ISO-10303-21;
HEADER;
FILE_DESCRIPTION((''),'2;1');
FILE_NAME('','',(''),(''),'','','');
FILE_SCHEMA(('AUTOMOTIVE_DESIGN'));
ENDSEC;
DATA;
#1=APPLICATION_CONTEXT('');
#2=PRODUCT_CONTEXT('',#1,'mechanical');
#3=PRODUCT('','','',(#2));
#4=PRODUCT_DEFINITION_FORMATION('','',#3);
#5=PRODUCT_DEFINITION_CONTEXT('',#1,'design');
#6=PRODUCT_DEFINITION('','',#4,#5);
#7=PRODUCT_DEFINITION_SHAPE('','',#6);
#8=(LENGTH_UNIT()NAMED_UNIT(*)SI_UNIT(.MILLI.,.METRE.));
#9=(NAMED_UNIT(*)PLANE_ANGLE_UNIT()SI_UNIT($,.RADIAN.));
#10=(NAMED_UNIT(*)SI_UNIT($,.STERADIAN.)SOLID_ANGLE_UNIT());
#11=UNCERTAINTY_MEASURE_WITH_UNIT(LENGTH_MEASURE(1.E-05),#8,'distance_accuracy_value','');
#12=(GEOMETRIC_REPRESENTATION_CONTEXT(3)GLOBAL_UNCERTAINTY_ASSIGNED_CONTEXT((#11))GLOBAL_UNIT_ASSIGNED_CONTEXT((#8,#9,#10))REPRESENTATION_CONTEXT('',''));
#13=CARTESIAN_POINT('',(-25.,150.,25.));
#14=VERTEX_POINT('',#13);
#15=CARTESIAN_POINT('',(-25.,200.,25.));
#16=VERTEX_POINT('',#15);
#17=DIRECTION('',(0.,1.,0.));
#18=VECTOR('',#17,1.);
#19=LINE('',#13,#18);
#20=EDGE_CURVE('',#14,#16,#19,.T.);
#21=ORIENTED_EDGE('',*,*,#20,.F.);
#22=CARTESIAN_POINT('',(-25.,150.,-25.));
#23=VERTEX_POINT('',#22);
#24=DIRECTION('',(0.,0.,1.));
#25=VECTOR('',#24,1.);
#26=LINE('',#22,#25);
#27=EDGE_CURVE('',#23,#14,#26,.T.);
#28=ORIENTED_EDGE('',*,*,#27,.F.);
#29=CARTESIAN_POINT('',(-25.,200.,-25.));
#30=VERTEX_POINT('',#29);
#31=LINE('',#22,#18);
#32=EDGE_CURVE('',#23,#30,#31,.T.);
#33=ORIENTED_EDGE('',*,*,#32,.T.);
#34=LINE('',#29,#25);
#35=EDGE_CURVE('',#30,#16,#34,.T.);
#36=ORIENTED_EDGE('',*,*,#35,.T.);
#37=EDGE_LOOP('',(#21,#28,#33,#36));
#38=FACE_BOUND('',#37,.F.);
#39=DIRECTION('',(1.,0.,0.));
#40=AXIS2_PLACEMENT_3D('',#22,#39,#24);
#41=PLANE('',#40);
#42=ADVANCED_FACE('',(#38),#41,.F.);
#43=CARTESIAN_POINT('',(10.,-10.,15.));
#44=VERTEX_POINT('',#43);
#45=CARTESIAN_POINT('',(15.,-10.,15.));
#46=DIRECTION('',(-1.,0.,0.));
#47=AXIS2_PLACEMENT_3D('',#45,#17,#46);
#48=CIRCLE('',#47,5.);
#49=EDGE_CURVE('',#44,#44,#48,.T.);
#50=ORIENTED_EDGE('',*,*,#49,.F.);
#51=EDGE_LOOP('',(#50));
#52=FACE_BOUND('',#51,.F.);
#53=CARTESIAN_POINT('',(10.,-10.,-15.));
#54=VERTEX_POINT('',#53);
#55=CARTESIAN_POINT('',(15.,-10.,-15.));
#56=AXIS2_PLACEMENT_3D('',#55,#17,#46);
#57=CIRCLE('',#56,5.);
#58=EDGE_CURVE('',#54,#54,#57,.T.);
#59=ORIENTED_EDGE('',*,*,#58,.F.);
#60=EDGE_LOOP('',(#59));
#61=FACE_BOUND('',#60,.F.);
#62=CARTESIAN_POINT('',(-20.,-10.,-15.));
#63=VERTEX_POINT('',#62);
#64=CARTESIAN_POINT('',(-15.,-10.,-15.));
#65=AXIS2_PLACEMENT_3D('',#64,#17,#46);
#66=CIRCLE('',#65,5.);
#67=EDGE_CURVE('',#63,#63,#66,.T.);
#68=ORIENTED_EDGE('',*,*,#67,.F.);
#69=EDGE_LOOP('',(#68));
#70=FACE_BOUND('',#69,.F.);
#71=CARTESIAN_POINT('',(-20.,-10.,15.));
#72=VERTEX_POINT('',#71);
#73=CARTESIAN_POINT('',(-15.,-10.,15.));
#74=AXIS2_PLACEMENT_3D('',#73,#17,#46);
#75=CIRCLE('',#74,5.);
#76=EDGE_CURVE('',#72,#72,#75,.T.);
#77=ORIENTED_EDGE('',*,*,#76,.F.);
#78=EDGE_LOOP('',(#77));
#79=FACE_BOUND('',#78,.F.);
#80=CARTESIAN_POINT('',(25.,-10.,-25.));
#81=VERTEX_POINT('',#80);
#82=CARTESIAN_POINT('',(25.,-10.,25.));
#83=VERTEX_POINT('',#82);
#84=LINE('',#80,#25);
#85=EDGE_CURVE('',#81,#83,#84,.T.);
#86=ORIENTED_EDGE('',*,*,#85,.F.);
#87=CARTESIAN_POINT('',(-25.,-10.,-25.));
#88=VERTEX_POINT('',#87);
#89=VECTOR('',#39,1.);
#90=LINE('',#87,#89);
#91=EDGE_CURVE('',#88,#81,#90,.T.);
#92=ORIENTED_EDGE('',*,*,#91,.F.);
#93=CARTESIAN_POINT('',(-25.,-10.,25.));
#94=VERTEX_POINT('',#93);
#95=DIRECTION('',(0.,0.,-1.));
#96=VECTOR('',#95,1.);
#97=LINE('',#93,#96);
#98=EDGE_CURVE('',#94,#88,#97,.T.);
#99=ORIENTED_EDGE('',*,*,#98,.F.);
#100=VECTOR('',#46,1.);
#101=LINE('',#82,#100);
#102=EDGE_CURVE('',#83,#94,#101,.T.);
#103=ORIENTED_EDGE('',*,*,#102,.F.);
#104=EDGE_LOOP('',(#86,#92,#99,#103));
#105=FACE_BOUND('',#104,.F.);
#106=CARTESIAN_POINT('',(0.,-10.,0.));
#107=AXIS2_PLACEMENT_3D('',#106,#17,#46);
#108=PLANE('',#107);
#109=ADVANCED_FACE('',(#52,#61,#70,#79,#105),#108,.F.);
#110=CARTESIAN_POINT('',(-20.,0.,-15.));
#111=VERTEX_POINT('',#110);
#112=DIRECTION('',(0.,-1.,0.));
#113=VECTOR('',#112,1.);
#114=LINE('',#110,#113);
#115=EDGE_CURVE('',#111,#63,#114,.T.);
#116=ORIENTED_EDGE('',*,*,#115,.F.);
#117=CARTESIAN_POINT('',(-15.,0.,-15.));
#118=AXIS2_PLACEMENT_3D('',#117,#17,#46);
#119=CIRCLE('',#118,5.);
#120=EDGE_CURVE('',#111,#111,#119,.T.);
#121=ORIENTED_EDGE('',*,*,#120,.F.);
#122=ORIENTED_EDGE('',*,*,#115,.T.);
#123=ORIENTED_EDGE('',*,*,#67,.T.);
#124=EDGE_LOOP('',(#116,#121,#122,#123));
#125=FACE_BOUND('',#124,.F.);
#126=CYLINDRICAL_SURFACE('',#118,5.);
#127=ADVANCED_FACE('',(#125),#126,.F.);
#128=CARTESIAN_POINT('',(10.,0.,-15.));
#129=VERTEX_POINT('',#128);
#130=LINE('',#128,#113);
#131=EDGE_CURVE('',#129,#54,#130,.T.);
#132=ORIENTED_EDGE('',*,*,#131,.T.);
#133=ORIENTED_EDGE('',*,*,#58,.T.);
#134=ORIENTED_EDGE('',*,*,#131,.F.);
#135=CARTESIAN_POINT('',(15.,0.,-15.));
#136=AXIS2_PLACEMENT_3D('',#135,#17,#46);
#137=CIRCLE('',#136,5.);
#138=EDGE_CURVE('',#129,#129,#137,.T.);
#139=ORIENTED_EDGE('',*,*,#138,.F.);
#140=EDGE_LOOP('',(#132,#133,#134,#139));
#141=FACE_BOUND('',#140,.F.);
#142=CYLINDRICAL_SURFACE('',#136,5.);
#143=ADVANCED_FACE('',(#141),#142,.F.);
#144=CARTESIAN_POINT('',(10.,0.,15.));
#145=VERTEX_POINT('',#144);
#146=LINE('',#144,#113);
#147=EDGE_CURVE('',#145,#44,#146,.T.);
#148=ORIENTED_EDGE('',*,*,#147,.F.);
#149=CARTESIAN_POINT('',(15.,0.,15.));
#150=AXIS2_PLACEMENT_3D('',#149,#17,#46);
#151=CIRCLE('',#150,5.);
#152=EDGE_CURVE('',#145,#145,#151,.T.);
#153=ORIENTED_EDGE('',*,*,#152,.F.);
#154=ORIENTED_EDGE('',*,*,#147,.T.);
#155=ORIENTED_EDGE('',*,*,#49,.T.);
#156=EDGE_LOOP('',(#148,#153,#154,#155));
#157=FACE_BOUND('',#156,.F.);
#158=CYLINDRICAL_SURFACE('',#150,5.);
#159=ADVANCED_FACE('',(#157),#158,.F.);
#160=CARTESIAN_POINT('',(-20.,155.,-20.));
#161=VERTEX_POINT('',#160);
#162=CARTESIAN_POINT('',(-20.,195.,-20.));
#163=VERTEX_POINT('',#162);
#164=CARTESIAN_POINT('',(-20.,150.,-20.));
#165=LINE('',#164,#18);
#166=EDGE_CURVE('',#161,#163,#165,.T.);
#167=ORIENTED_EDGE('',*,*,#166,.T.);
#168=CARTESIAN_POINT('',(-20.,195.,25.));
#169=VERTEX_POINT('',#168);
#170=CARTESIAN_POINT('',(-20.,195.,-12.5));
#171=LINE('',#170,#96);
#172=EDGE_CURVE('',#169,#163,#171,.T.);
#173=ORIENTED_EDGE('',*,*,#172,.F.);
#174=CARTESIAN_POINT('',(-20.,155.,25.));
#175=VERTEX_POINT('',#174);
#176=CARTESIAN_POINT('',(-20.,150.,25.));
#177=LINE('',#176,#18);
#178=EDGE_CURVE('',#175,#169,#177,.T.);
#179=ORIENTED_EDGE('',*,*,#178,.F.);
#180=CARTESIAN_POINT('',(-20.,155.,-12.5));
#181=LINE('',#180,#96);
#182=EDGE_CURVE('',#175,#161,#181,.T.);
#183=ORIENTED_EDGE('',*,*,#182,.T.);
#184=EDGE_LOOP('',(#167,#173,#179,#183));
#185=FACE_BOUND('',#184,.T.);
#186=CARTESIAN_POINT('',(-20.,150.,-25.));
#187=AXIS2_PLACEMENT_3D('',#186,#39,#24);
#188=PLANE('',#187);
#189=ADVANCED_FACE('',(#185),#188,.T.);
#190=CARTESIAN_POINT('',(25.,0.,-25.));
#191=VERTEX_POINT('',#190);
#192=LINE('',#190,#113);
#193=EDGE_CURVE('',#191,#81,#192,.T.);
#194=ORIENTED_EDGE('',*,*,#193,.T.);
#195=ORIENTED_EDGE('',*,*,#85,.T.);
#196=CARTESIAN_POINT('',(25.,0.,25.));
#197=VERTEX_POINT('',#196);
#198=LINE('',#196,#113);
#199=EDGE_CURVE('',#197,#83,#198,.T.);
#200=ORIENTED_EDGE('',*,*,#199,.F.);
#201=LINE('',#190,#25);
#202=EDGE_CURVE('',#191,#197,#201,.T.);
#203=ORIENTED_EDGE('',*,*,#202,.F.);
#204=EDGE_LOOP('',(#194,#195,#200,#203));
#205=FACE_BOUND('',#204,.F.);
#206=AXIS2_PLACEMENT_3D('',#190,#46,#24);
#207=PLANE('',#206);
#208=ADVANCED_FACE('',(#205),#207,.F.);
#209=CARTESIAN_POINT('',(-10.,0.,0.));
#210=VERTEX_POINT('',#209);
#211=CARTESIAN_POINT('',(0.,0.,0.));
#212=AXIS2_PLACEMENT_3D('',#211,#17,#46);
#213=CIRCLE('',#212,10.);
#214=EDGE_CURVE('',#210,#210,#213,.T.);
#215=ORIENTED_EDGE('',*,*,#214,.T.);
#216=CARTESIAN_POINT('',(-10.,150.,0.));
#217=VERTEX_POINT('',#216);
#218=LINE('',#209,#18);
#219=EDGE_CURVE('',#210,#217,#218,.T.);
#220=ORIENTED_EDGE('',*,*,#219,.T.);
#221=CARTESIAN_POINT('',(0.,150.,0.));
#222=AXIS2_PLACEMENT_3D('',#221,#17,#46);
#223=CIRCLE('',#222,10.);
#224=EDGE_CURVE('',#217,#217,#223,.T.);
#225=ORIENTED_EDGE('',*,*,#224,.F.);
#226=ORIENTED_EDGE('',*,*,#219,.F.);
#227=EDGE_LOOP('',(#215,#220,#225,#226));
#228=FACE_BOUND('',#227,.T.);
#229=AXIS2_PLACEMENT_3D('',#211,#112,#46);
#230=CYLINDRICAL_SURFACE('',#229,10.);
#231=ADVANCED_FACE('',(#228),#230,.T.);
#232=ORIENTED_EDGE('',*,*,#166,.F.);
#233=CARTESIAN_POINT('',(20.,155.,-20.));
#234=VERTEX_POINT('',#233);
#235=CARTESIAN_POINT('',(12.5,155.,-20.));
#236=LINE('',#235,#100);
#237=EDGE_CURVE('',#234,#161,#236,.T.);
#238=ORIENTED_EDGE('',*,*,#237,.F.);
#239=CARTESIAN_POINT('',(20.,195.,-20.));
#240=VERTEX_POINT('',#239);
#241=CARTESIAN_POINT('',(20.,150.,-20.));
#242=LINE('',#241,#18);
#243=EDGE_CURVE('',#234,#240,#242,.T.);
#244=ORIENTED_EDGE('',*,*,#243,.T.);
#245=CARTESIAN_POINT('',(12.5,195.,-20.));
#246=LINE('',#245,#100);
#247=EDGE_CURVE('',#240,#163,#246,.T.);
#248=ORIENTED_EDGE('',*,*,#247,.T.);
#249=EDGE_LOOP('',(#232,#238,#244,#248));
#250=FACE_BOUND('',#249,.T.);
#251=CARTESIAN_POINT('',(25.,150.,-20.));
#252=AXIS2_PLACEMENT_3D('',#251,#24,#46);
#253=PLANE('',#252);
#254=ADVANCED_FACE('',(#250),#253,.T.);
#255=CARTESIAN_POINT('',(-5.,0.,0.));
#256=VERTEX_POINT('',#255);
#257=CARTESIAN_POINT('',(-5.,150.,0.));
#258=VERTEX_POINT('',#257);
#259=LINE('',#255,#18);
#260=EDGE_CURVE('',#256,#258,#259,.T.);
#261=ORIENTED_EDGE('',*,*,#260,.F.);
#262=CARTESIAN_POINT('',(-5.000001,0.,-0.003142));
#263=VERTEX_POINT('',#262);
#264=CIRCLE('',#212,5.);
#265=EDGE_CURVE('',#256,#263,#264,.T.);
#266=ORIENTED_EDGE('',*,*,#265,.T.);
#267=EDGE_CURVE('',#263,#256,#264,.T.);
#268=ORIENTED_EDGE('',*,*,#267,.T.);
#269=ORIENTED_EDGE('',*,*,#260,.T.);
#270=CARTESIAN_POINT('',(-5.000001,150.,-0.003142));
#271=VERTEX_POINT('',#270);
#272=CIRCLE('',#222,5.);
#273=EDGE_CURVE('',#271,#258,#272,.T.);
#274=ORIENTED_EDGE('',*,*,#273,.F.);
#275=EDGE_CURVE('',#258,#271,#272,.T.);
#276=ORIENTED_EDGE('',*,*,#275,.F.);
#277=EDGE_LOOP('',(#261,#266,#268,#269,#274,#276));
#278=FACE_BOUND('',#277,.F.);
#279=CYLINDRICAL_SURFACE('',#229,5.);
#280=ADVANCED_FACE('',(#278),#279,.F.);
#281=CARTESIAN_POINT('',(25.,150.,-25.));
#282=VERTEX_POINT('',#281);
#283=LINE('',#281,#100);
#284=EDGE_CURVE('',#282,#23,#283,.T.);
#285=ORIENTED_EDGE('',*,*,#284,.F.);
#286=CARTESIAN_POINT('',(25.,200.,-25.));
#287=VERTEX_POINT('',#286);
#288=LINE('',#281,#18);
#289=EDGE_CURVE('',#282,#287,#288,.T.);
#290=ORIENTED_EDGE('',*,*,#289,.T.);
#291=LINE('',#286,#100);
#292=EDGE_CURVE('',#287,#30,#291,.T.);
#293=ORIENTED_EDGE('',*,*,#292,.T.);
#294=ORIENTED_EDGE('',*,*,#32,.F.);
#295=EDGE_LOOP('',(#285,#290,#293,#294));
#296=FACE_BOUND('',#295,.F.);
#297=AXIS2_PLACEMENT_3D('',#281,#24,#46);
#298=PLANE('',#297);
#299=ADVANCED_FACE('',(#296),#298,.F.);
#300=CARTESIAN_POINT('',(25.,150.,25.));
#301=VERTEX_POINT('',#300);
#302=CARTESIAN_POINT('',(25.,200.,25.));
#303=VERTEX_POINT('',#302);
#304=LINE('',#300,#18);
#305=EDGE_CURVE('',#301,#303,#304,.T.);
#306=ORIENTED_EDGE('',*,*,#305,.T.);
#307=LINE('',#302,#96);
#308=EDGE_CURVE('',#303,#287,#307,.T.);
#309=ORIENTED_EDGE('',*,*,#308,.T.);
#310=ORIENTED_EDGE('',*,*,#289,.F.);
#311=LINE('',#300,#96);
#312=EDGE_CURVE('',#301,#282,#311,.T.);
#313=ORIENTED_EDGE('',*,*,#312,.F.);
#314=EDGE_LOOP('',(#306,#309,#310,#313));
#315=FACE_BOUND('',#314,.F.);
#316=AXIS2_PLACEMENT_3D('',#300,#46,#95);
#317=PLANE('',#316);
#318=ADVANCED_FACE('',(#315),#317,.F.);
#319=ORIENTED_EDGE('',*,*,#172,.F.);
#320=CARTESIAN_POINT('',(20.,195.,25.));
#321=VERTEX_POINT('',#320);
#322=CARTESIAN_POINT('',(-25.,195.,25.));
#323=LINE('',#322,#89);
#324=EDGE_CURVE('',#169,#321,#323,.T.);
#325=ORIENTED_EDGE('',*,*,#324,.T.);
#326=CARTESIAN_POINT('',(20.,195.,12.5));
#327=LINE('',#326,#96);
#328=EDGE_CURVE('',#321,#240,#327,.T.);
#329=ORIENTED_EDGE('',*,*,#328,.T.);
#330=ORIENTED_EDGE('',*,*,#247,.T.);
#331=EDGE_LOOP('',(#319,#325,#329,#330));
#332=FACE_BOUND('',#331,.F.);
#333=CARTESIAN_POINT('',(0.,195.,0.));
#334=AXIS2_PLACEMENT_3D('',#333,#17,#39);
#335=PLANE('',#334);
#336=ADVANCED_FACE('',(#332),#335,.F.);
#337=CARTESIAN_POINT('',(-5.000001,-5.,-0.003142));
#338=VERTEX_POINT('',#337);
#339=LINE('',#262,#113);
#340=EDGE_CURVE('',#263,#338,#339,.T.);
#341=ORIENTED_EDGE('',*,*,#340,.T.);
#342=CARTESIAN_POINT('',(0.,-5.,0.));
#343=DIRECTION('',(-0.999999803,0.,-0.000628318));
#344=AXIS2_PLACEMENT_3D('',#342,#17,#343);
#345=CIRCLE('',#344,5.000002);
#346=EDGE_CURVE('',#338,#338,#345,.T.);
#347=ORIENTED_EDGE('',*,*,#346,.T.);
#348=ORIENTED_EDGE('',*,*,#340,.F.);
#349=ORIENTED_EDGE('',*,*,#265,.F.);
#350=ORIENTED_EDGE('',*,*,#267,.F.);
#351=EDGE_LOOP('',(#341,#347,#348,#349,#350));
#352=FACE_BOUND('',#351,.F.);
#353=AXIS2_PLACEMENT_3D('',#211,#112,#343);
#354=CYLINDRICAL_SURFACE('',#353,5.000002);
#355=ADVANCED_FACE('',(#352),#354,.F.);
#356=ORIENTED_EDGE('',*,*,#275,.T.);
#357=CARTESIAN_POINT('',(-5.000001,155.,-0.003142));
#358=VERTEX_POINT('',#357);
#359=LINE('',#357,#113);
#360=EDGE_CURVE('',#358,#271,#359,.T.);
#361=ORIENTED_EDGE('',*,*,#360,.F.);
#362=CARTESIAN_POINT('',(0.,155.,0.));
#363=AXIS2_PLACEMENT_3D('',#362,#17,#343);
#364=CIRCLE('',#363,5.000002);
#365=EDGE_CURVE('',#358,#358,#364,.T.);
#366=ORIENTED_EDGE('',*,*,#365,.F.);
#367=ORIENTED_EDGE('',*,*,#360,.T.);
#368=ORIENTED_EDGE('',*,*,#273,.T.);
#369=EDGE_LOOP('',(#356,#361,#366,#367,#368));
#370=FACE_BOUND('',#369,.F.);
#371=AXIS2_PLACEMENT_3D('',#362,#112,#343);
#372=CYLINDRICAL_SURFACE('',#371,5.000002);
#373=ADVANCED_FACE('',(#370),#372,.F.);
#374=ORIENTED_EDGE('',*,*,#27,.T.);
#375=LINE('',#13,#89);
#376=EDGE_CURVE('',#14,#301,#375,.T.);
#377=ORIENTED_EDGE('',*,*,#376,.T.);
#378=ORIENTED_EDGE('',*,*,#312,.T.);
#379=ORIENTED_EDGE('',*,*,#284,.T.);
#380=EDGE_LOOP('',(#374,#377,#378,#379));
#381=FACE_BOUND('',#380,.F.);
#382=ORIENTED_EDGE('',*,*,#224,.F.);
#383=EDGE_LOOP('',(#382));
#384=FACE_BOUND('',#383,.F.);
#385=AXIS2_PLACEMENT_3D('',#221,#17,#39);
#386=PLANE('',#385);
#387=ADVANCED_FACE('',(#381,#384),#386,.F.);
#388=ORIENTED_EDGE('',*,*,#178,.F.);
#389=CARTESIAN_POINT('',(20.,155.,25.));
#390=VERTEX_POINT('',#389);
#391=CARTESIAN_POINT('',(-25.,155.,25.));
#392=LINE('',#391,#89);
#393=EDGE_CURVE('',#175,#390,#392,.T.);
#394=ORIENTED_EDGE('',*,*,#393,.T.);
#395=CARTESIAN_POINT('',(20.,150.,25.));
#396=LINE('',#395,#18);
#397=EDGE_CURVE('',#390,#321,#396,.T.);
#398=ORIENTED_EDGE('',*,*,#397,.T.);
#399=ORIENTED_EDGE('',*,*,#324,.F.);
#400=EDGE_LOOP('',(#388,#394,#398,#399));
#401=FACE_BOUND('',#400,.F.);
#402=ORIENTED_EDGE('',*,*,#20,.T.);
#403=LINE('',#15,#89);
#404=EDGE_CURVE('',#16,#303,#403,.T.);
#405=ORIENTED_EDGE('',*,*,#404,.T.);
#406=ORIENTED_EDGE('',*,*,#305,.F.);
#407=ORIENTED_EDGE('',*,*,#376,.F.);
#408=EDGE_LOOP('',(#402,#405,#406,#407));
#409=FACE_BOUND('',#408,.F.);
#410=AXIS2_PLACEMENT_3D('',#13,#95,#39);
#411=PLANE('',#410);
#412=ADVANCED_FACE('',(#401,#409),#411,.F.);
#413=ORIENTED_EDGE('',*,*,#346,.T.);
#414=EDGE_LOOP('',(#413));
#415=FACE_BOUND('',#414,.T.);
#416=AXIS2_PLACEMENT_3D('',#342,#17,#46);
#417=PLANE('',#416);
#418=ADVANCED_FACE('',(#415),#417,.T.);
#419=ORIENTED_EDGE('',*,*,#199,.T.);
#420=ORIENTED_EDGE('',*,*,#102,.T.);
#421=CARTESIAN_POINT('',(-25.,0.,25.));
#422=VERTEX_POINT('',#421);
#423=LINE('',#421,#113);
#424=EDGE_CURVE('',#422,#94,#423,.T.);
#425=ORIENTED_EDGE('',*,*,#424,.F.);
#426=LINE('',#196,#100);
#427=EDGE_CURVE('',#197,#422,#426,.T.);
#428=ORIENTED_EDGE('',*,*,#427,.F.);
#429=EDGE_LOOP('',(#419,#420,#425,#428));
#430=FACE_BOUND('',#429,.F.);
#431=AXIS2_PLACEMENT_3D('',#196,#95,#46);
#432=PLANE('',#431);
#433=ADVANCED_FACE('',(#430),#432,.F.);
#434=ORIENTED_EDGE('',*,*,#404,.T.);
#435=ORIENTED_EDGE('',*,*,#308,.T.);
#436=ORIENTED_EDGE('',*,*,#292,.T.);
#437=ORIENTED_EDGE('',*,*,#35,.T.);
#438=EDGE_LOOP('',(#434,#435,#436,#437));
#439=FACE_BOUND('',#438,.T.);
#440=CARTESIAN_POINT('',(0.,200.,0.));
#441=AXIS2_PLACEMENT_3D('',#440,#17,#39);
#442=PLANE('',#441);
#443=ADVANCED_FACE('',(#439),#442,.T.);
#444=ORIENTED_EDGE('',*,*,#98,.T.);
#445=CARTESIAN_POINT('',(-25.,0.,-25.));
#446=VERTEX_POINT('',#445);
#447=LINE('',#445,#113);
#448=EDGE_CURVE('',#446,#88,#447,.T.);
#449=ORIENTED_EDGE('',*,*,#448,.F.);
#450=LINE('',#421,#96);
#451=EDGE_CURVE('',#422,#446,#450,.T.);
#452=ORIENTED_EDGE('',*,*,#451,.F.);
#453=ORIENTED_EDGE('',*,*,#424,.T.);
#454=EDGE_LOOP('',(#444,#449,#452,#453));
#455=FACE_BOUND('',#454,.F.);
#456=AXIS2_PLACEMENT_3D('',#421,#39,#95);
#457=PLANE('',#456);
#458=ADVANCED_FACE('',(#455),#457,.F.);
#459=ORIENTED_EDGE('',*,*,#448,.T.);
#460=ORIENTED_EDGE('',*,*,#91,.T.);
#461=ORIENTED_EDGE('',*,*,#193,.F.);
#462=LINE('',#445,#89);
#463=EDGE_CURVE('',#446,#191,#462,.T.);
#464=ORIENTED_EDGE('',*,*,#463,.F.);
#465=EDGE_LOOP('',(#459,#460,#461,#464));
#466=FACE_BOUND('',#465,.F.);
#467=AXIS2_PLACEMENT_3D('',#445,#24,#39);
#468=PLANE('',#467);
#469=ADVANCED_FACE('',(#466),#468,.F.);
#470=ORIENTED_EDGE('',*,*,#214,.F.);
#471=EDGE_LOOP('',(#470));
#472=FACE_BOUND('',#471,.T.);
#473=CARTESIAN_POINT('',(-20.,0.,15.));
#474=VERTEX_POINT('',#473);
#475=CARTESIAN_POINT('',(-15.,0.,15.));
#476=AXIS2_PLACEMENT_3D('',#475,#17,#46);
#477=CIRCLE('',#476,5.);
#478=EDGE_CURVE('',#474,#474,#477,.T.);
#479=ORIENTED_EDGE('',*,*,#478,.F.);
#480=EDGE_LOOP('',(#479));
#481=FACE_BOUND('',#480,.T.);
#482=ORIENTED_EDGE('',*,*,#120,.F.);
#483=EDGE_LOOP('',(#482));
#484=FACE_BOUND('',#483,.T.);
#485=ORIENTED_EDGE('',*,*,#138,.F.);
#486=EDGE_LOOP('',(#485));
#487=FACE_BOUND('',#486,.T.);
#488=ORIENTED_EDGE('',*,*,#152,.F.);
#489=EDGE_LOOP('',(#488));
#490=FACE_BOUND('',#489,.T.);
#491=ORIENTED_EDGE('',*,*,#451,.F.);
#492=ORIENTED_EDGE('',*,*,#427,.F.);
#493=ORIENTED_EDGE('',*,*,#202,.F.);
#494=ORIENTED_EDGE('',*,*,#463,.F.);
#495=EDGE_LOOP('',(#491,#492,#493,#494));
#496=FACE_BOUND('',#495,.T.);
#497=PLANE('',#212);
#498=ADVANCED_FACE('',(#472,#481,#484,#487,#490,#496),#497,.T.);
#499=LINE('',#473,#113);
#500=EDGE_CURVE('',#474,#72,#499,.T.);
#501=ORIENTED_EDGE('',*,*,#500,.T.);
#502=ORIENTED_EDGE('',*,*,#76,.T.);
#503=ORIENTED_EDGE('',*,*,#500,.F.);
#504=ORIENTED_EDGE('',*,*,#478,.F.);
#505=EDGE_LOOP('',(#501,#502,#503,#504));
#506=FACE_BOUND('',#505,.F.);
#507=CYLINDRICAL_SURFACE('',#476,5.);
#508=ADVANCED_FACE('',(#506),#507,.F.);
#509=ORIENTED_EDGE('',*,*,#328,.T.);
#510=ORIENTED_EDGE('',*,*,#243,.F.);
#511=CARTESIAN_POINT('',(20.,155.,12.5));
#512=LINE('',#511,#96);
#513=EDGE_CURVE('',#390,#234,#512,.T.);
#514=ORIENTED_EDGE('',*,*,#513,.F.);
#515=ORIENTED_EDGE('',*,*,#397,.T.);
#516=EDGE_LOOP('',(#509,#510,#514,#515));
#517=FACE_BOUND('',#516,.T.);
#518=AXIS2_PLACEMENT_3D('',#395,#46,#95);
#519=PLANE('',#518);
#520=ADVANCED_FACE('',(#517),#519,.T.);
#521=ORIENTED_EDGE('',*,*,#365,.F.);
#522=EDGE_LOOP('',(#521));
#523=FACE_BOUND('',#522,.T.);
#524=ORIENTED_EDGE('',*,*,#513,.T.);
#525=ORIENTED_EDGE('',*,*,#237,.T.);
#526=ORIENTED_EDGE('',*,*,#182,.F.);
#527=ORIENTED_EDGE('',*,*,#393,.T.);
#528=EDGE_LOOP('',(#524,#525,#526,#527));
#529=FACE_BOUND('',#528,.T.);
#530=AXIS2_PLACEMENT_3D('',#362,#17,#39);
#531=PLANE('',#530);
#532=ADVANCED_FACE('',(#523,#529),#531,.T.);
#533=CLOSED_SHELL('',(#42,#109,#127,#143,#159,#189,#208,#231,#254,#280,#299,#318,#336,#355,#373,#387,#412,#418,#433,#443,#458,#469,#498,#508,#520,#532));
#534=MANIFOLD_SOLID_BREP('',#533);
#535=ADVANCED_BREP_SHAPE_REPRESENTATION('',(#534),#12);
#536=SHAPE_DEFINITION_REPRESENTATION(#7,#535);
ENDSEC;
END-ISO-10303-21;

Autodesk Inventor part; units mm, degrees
ref_plane "YZ Plane" through (0, 0, 0) normal (1, 0, 0) x (0, 1, 0)
ref_plane "XZ Plane" through (0, 0, 0) normal (0, 1, 0) x (-1, 0, 0)
ref_plane "XY Plane" through (0, 0, 0) normal (0, 0, 1) x (1, 0, 0)
sketch "Sketch1" plane through (0, 0, 0) normal (0, 1, 0) x (-1, 0, 0)
  line L0 (-25, 25) -> (25, 25)
  line L1 (25, 25) -> (25, -25)
  line L2 (25, -25) -> (-25, -25)
  line L3 (-25, -25) -> (-25, 25)
  line L4 (-25, 25) -> (25, -25) construction
  line L5 (25, 25) -> (-25, -25) construction
  circle A0 centre (15, -15) radius 5
  circle A1 centre (-15, -15) radius 5
  circle A2 centre (15, 15) radius 5
  circle A3 centre (-15, 15) radius 5
  circle A4 centre (0, 0) radius 10
  dimension "d0" = 50
  dimension "d1" = 50
  dimension "d2" = 10
  dimension "d3" = 10
  dimension "d6" = 30
  dimension "d9" = 30
  dimension "d12" = 20
extrude "Extrusion1" add sketch "Sketch1" along normal blind 150 contours A4
extrude "Extrusion2" add sketch "Sketch1" against normal blind 10 contours L0 L1 L2 L3 | A4
thread "Thread1" size "M10x1.5" class "6H" standard "ANSI Metric M Profile" length 8
thread "Thread2" size "M10x1.5" class "6H" standard "ANSI Metric M Profile" length 8
thread "Thread3" size "M10x1.5" class "6H" standard "ANSI Metric M Profile" length 8
thread "Thread4" size "M10x1.5" class "6H" standard "ANSI Metric M Profile" length 8
sketch "Sketch2" plane through (0, 150, 0) normal (0, 1, 0) x (1, 0, 0)
  line L0 (25, 25) -> (-25, 25) projected
  line L1 (-25, 25) -> (-25, -25) projected
  line L2 (-25, -25) -> (25, -25) projected
  line L3 (25, -25) -> (25, 25) projected
  point P0 (0, 0)
extrude "Extrusion3" add sketch "Sketch2" along normal blind 50
shell "Shell1" thickness 5 removed faces 1 at (-8.3333, 166.6667, 25)
equation "\"d1\" = d0"
equation "\"d3\" = d2"
properties part number "camera_pole"
